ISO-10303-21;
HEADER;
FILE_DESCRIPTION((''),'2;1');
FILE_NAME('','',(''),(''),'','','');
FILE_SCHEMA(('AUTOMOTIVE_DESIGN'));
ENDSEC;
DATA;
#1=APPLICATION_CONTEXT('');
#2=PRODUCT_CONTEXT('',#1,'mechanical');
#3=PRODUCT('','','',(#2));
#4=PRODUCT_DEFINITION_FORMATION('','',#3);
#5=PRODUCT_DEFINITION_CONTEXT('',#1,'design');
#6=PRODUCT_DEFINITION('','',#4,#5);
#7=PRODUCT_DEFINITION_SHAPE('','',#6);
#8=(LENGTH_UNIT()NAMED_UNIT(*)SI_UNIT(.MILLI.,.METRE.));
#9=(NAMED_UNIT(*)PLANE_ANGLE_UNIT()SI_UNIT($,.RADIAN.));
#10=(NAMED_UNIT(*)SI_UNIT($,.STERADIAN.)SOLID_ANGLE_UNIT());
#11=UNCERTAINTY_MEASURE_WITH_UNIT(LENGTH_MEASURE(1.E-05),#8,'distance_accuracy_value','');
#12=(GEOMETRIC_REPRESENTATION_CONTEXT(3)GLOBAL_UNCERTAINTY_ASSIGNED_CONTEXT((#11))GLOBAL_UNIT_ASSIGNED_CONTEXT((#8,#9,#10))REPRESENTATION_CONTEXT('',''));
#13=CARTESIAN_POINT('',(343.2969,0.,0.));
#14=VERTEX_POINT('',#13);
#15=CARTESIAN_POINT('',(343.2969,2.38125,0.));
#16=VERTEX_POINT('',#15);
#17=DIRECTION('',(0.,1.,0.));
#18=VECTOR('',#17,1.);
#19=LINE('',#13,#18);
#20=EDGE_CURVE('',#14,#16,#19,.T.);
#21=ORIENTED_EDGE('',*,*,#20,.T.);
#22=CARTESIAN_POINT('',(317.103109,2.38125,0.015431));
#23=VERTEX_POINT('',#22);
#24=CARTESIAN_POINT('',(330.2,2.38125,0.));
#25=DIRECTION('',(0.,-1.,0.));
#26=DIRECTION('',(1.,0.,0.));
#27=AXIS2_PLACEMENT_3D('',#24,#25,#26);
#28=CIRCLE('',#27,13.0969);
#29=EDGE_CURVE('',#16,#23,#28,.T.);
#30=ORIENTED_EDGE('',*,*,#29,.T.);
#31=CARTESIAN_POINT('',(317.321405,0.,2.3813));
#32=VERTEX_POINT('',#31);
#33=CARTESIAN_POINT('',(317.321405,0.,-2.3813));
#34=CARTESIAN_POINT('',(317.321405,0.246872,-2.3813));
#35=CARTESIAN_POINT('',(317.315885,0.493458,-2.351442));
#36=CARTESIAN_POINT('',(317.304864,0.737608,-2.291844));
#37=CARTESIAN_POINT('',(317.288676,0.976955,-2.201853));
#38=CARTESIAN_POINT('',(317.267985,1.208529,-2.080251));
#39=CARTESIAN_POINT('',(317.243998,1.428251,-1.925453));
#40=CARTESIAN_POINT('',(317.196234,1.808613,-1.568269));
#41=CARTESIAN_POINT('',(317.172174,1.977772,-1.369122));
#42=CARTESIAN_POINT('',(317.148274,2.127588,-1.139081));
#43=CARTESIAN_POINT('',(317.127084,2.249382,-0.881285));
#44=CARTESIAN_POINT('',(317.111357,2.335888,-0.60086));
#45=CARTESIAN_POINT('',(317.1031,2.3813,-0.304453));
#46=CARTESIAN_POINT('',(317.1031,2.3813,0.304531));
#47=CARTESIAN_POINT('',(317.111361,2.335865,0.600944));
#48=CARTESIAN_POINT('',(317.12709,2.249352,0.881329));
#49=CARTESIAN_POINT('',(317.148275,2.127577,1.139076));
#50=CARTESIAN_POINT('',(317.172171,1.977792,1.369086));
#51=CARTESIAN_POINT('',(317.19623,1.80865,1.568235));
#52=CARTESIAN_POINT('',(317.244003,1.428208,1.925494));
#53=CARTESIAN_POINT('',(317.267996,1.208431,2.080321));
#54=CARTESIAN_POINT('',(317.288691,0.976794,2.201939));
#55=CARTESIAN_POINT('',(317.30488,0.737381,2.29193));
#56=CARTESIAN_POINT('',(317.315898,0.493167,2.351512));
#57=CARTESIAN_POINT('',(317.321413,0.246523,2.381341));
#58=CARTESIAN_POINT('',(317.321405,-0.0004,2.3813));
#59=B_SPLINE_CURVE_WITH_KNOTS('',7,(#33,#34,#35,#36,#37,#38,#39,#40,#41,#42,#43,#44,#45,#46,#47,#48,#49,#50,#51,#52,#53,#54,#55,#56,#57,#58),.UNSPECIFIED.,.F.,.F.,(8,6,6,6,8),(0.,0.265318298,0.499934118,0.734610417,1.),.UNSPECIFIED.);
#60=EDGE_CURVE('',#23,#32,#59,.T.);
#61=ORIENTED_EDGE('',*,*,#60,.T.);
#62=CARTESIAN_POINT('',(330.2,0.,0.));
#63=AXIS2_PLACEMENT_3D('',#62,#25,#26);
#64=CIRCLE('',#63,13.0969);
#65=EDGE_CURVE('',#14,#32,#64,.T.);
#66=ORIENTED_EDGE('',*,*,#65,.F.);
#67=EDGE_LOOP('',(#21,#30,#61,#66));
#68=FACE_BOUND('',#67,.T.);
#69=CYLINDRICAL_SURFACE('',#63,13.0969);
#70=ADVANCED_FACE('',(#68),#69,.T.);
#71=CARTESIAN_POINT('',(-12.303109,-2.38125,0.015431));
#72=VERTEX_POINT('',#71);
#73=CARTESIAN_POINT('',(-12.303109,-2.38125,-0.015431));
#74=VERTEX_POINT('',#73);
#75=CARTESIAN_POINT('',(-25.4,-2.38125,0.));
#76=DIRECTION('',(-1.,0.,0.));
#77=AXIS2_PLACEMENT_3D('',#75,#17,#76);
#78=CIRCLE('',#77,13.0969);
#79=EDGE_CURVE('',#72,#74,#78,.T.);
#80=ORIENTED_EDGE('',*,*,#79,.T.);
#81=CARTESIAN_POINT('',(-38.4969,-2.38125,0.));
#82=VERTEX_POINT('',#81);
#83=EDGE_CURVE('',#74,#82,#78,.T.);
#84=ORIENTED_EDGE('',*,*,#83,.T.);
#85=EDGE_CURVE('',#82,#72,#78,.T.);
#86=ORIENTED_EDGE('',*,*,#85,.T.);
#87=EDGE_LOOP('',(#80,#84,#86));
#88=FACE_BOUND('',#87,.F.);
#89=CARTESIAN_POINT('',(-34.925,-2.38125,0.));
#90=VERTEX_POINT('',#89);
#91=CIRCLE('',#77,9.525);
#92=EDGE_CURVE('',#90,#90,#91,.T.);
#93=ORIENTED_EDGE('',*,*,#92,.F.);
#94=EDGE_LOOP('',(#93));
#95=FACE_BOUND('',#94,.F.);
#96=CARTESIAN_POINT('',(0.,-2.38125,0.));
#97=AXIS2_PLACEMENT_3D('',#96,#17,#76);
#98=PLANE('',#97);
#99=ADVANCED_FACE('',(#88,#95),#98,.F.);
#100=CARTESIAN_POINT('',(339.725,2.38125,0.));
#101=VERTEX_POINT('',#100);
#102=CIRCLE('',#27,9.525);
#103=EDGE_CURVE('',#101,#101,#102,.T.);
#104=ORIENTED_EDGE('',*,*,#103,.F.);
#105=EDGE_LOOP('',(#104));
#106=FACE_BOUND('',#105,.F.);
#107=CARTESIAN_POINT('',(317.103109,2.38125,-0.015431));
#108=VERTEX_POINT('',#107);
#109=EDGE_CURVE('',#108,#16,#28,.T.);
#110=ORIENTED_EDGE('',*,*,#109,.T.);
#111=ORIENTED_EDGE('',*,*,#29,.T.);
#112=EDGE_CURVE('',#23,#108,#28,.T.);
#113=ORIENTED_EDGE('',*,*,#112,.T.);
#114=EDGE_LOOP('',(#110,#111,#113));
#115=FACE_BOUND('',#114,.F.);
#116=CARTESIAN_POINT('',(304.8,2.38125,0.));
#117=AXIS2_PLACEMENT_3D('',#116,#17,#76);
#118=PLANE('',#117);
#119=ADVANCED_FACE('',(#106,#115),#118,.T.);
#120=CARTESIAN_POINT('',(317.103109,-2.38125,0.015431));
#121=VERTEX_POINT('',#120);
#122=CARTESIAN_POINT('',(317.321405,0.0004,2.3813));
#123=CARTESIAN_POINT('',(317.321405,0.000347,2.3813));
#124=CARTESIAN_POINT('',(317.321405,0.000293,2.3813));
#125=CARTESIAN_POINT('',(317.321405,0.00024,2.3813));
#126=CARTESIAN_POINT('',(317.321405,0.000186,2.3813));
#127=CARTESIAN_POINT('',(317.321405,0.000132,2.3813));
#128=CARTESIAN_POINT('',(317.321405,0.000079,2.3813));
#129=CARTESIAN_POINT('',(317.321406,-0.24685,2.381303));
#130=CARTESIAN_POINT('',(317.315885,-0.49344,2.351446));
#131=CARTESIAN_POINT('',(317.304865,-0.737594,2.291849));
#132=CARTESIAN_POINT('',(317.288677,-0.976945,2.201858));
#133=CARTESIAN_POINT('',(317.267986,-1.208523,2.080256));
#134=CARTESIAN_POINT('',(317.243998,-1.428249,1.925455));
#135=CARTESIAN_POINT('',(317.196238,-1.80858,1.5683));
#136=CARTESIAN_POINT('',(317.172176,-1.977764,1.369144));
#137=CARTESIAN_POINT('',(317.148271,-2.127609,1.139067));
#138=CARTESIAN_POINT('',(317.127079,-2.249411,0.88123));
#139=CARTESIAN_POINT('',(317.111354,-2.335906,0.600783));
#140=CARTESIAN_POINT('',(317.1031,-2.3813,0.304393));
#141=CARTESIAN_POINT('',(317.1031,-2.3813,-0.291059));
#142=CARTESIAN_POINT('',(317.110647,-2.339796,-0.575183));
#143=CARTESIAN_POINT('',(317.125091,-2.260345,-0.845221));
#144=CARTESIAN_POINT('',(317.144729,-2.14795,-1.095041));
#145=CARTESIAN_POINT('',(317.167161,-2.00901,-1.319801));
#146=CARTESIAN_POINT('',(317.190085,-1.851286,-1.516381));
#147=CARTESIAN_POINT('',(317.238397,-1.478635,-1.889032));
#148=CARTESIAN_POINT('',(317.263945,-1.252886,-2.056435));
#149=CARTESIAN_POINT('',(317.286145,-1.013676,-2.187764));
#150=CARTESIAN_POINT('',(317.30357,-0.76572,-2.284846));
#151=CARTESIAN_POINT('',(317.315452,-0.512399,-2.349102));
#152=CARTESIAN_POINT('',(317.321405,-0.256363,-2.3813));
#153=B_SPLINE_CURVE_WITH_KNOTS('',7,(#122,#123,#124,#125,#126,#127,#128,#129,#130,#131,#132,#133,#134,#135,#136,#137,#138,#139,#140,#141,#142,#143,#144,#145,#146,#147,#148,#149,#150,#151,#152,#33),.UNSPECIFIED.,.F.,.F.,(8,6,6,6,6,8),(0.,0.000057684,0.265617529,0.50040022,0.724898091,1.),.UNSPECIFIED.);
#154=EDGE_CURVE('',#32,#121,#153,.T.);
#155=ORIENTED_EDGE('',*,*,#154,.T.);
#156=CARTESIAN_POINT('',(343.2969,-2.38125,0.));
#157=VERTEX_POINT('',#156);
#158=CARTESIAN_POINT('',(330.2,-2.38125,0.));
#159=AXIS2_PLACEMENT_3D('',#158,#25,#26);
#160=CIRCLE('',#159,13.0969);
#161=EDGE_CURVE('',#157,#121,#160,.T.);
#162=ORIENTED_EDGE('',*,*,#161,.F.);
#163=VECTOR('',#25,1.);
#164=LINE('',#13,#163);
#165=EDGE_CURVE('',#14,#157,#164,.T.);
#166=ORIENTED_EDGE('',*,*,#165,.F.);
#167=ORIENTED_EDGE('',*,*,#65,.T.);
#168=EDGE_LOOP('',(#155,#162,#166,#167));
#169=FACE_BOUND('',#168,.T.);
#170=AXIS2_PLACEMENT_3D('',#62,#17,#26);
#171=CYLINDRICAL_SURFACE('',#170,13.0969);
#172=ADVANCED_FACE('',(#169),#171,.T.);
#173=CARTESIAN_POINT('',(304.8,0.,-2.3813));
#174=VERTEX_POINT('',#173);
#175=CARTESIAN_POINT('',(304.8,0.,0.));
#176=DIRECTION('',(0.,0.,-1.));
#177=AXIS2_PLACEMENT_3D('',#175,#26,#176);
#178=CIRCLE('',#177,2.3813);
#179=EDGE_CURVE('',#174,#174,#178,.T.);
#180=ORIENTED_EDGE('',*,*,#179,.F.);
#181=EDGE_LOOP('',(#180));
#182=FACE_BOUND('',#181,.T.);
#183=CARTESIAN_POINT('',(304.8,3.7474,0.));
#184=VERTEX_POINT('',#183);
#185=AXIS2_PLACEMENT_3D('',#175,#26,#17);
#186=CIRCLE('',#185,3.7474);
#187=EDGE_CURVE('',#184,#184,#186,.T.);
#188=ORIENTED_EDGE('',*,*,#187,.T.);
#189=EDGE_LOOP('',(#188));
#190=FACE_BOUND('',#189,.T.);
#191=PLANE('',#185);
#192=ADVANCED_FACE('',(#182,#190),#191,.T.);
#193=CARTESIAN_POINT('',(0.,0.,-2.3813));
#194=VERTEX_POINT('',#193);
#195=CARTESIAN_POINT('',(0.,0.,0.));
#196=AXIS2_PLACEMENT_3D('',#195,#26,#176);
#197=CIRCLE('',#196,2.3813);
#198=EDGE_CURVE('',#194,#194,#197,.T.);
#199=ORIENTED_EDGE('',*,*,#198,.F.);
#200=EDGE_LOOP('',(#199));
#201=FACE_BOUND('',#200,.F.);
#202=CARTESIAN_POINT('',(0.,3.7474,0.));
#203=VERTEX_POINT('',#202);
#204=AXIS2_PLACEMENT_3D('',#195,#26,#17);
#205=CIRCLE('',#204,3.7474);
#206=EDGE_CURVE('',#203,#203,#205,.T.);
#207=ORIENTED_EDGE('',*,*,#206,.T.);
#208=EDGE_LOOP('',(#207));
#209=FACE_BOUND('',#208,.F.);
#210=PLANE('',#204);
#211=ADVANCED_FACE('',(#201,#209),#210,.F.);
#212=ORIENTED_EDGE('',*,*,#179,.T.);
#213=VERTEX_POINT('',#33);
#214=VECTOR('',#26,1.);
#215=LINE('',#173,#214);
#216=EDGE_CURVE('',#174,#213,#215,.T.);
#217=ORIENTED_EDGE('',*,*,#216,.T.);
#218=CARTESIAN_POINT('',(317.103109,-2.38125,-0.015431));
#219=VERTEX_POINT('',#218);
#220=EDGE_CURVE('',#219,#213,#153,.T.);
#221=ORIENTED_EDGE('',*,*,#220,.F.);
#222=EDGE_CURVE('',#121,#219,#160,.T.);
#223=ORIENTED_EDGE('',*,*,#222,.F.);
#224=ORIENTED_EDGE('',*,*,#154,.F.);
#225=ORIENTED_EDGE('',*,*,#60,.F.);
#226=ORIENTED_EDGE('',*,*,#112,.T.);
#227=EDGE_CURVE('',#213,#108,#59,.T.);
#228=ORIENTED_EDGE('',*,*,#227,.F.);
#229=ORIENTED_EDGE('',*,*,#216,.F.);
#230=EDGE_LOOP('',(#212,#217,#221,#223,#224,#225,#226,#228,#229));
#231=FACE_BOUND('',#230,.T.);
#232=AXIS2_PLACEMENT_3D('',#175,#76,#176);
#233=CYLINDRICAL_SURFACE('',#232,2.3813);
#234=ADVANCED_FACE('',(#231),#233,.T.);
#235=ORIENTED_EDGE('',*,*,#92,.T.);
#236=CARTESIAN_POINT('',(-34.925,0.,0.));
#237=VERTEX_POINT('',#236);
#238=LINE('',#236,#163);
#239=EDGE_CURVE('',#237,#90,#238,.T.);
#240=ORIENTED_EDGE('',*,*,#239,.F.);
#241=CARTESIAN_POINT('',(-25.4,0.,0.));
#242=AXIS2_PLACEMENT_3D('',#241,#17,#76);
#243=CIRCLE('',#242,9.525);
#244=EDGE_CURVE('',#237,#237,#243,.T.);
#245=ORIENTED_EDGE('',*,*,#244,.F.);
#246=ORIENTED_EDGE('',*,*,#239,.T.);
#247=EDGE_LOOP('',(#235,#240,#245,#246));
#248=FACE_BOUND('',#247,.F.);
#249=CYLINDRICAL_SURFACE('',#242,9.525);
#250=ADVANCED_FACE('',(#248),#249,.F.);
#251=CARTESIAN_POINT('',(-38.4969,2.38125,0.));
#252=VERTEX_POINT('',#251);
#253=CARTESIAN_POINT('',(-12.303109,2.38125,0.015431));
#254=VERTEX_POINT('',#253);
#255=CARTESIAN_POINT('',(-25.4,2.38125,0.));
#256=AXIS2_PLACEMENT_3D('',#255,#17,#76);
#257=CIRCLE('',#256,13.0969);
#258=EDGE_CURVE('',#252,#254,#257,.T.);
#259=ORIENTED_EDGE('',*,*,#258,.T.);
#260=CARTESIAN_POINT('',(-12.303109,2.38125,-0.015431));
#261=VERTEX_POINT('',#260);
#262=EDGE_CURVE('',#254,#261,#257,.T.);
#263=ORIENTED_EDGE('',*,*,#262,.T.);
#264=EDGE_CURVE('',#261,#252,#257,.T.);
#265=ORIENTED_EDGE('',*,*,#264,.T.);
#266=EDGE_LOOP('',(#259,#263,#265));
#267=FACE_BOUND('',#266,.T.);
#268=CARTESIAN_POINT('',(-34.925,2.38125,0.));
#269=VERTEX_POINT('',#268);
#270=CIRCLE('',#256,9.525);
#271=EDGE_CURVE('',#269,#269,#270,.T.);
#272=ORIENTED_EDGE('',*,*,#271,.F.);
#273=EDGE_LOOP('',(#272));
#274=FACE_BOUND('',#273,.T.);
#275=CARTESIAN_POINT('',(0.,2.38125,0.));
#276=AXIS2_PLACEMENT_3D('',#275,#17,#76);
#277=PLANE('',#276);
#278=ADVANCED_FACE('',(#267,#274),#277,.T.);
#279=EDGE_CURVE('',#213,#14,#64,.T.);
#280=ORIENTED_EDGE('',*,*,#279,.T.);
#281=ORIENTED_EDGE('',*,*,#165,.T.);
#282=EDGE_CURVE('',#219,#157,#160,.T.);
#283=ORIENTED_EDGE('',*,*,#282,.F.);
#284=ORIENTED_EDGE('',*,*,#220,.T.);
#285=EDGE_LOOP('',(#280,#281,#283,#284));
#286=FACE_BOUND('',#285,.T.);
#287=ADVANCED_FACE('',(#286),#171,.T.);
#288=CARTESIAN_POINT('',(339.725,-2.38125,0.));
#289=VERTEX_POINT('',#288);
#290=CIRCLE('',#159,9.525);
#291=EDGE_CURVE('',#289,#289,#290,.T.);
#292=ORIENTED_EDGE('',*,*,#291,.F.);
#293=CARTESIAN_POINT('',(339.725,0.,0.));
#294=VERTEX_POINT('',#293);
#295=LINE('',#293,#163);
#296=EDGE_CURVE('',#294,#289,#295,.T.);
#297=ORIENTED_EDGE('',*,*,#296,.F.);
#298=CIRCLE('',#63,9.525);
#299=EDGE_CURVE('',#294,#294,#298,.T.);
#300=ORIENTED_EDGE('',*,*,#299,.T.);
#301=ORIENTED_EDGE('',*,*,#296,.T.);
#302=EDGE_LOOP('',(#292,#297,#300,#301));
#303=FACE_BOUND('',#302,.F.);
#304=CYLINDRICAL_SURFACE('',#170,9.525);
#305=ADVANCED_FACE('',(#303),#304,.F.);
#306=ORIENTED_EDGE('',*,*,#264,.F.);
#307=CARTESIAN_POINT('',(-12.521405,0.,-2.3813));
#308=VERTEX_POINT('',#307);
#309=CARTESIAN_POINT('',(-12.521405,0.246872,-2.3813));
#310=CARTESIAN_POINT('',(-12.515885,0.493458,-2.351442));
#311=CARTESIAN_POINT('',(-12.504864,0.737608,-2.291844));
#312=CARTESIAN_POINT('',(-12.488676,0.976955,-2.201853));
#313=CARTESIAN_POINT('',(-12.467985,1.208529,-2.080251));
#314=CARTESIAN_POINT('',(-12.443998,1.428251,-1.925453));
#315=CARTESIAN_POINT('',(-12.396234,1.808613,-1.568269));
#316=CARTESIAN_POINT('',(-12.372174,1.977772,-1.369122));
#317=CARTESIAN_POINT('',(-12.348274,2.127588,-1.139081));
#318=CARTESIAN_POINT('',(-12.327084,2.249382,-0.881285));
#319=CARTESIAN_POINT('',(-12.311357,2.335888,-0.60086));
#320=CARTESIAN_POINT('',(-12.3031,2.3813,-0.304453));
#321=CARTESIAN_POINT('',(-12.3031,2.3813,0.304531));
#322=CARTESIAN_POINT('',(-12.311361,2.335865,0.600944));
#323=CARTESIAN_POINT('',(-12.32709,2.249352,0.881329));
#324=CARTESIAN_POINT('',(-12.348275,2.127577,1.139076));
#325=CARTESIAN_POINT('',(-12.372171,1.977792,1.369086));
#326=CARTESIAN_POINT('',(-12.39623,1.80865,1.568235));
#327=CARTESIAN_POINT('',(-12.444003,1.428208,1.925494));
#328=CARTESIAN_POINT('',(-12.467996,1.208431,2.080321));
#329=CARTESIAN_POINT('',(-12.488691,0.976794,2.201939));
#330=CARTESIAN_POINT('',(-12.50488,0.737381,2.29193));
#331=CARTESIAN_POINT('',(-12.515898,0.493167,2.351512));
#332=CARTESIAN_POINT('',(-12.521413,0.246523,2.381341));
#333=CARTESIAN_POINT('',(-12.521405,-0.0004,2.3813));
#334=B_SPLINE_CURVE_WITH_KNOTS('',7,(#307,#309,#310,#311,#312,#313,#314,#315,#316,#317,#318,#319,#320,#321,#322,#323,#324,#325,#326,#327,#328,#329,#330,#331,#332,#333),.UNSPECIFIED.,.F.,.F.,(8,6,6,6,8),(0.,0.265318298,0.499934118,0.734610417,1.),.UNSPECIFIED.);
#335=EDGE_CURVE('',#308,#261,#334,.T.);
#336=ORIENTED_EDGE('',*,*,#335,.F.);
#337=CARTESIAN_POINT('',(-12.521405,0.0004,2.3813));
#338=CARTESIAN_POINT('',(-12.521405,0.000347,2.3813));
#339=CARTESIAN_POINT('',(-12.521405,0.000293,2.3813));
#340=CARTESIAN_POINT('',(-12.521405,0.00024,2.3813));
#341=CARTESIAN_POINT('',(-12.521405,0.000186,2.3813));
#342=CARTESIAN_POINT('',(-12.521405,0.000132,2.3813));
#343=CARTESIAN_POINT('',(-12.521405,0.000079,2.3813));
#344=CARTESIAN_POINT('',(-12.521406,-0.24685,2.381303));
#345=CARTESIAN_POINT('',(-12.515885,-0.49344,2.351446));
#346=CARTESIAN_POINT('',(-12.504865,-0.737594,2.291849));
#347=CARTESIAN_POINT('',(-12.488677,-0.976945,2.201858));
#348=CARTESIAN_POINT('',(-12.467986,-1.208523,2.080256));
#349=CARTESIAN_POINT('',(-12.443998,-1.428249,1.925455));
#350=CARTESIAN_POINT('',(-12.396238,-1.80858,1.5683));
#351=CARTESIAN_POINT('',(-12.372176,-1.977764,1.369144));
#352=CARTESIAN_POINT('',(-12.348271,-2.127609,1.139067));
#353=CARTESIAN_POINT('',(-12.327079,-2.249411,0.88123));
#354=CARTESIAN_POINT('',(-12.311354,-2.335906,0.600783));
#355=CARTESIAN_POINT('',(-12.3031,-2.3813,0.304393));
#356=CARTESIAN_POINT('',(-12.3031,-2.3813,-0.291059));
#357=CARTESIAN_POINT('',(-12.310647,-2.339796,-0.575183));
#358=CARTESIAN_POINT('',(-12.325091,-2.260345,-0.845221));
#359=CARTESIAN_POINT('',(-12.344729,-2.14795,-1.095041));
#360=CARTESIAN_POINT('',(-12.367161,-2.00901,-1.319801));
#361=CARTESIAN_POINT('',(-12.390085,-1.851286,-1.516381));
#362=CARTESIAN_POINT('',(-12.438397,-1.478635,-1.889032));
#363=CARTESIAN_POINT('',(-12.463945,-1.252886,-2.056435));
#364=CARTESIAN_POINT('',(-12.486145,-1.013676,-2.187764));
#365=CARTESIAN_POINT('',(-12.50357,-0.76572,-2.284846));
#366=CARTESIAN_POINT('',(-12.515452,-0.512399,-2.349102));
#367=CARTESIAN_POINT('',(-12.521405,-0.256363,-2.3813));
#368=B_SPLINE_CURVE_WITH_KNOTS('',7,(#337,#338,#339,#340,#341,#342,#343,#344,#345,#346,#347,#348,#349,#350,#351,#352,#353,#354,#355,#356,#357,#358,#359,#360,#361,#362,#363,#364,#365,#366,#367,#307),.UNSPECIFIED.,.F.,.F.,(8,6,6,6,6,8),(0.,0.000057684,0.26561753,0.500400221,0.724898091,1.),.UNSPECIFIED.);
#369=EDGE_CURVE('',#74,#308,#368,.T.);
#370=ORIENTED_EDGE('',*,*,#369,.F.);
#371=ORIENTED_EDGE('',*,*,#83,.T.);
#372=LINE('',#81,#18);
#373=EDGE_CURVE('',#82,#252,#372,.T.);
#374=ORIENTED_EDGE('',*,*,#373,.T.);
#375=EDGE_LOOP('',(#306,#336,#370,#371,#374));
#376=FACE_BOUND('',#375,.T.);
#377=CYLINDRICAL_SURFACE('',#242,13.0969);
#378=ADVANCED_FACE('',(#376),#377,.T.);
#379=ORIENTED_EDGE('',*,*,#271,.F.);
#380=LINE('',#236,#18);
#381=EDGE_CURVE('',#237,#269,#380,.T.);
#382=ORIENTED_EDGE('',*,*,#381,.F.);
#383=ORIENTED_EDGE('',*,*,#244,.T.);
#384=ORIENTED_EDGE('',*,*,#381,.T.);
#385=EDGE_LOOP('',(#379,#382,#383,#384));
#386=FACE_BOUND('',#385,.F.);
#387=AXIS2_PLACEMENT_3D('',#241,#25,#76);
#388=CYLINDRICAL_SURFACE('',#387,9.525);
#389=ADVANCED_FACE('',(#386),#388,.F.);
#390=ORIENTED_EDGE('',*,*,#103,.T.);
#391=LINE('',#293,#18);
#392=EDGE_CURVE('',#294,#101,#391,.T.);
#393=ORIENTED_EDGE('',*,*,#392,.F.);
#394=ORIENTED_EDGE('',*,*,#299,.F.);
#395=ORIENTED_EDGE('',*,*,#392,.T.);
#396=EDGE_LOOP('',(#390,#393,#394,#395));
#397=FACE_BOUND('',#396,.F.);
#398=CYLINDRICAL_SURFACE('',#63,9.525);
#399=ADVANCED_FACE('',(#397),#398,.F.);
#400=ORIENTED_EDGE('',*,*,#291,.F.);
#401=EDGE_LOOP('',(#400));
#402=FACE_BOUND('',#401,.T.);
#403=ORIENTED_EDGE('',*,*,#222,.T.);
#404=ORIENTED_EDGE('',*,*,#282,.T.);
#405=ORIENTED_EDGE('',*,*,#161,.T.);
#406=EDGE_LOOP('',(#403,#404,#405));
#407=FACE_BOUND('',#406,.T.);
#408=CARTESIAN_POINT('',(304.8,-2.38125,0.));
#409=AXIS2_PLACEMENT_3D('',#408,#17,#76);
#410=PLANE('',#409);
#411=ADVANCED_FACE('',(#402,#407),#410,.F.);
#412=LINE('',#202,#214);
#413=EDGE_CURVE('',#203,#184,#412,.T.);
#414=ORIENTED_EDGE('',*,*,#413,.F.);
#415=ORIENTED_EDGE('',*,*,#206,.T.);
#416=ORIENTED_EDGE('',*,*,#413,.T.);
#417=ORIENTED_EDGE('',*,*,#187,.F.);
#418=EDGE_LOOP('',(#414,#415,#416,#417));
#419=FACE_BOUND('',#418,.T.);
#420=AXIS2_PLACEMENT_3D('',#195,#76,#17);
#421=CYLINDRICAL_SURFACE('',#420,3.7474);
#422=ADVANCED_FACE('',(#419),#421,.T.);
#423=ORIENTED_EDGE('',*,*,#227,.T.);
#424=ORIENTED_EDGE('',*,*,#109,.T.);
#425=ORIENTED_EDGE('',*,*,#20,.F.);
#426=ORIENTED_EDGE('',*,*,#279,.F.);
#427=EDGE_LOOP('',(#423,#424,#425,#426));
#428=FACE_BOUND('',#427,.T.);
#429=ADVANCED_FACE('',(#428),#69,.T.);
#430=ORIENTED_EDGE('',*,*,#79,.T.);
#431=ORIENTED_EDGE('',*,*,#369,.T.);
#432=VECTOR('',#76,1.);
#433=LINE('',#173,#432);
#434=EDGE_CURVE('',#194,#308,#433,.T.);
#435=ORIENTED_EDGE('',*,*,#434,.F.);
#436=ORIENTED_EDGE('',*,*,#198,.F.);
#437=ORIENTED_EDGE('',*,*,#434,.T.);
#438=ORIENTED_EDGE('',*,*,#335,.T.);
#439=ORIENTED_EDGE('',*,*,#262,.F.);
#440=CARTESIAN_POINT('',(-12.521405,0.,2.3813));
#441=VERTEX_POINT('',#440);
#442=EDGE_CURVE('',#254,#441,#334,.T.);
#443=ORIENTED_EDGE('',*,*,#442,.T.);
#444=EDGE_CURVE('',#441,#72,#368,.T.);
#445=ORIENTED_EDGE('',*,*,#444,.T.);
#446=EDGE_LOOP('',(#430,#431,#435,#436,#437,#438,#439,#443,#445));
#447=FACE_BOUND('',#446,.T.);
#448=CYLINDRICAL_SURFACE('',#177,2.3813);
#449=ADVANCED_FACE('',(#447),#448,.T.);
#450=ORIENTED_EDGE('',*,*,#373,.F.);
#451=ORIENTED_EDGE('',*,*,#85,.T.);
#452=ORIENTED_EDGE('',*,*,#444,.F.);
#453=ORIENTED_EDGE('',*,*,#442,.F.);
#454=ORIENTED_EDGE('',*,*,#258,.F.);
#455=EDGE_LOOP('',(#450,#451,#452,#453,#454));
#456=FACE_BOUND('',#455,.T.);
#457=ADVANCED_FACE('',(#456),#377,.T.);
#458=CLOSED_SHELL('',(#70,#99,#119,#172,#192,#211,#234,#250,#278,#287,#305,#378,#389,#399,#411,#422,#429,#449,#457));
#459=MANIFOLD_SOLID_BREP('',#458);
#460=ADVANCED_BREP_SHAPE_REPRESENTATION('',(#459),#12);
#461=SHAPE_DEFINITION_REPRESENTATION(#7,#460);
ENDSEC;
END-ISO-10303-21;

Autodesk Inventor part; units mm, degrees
ref_plane "YZ Plane" through (0, 0, 0) normal (1, 0, 0) x (0, 1, 0)
sketch "Sketch1" plane through (0, 0, 0) normal (1, 0, 0) x (0, 1, 0)
  circle A0 centre (0, 0) radius 3.7474
extrude "Black Shaft" add sketch "Sketch1" along normal blind 304.8
sketch "Sketch3" plane through (304.8, 0, 0) normal (1, 0, 0) x (0, 0, -1)
  circle A0 centre (0, 0) radius 2.3813
  dimension "d2" = 4.7625
extrude "Screwed Shaft" add sketch "Sketch3" along normal blind 12.7 and the other way blind 317.5
ref_plane "Mid Plane" through (152.4, 0, 0) normal (1, 0, 0) x (0, 0, -1)
sketch "Sketch4" plane through (0, 0, 0) normal (0, 1, 0) x (-1, 0, 0)
  circle A0 centre (25.4, 0) radius 13.0969
  line L0 (12.7, -2.3813) -> (12.7, 2.3813) construction
  circle A1 centre (25.4, 0) radius 9.525
  point P0 (0, 0)
  dimension "d7" = 26.1938
  dimension "d8" = 12.7
  dimension "d9" = 19.05
extrude "Rod End1" add sketch "Sketch4" along normal mid plane 4.7625
mirror "Rod End2" about plane through (152.4, 0, 0) normal (1, 0, 0) of "Rod End1"
ref_plane "Horizontal Midplane" through (-25.4, 0, 0) normal (0, 1, 0) x (1, 0, 0)
properties part number "Tie Rods" material "Aluminum 6061"
